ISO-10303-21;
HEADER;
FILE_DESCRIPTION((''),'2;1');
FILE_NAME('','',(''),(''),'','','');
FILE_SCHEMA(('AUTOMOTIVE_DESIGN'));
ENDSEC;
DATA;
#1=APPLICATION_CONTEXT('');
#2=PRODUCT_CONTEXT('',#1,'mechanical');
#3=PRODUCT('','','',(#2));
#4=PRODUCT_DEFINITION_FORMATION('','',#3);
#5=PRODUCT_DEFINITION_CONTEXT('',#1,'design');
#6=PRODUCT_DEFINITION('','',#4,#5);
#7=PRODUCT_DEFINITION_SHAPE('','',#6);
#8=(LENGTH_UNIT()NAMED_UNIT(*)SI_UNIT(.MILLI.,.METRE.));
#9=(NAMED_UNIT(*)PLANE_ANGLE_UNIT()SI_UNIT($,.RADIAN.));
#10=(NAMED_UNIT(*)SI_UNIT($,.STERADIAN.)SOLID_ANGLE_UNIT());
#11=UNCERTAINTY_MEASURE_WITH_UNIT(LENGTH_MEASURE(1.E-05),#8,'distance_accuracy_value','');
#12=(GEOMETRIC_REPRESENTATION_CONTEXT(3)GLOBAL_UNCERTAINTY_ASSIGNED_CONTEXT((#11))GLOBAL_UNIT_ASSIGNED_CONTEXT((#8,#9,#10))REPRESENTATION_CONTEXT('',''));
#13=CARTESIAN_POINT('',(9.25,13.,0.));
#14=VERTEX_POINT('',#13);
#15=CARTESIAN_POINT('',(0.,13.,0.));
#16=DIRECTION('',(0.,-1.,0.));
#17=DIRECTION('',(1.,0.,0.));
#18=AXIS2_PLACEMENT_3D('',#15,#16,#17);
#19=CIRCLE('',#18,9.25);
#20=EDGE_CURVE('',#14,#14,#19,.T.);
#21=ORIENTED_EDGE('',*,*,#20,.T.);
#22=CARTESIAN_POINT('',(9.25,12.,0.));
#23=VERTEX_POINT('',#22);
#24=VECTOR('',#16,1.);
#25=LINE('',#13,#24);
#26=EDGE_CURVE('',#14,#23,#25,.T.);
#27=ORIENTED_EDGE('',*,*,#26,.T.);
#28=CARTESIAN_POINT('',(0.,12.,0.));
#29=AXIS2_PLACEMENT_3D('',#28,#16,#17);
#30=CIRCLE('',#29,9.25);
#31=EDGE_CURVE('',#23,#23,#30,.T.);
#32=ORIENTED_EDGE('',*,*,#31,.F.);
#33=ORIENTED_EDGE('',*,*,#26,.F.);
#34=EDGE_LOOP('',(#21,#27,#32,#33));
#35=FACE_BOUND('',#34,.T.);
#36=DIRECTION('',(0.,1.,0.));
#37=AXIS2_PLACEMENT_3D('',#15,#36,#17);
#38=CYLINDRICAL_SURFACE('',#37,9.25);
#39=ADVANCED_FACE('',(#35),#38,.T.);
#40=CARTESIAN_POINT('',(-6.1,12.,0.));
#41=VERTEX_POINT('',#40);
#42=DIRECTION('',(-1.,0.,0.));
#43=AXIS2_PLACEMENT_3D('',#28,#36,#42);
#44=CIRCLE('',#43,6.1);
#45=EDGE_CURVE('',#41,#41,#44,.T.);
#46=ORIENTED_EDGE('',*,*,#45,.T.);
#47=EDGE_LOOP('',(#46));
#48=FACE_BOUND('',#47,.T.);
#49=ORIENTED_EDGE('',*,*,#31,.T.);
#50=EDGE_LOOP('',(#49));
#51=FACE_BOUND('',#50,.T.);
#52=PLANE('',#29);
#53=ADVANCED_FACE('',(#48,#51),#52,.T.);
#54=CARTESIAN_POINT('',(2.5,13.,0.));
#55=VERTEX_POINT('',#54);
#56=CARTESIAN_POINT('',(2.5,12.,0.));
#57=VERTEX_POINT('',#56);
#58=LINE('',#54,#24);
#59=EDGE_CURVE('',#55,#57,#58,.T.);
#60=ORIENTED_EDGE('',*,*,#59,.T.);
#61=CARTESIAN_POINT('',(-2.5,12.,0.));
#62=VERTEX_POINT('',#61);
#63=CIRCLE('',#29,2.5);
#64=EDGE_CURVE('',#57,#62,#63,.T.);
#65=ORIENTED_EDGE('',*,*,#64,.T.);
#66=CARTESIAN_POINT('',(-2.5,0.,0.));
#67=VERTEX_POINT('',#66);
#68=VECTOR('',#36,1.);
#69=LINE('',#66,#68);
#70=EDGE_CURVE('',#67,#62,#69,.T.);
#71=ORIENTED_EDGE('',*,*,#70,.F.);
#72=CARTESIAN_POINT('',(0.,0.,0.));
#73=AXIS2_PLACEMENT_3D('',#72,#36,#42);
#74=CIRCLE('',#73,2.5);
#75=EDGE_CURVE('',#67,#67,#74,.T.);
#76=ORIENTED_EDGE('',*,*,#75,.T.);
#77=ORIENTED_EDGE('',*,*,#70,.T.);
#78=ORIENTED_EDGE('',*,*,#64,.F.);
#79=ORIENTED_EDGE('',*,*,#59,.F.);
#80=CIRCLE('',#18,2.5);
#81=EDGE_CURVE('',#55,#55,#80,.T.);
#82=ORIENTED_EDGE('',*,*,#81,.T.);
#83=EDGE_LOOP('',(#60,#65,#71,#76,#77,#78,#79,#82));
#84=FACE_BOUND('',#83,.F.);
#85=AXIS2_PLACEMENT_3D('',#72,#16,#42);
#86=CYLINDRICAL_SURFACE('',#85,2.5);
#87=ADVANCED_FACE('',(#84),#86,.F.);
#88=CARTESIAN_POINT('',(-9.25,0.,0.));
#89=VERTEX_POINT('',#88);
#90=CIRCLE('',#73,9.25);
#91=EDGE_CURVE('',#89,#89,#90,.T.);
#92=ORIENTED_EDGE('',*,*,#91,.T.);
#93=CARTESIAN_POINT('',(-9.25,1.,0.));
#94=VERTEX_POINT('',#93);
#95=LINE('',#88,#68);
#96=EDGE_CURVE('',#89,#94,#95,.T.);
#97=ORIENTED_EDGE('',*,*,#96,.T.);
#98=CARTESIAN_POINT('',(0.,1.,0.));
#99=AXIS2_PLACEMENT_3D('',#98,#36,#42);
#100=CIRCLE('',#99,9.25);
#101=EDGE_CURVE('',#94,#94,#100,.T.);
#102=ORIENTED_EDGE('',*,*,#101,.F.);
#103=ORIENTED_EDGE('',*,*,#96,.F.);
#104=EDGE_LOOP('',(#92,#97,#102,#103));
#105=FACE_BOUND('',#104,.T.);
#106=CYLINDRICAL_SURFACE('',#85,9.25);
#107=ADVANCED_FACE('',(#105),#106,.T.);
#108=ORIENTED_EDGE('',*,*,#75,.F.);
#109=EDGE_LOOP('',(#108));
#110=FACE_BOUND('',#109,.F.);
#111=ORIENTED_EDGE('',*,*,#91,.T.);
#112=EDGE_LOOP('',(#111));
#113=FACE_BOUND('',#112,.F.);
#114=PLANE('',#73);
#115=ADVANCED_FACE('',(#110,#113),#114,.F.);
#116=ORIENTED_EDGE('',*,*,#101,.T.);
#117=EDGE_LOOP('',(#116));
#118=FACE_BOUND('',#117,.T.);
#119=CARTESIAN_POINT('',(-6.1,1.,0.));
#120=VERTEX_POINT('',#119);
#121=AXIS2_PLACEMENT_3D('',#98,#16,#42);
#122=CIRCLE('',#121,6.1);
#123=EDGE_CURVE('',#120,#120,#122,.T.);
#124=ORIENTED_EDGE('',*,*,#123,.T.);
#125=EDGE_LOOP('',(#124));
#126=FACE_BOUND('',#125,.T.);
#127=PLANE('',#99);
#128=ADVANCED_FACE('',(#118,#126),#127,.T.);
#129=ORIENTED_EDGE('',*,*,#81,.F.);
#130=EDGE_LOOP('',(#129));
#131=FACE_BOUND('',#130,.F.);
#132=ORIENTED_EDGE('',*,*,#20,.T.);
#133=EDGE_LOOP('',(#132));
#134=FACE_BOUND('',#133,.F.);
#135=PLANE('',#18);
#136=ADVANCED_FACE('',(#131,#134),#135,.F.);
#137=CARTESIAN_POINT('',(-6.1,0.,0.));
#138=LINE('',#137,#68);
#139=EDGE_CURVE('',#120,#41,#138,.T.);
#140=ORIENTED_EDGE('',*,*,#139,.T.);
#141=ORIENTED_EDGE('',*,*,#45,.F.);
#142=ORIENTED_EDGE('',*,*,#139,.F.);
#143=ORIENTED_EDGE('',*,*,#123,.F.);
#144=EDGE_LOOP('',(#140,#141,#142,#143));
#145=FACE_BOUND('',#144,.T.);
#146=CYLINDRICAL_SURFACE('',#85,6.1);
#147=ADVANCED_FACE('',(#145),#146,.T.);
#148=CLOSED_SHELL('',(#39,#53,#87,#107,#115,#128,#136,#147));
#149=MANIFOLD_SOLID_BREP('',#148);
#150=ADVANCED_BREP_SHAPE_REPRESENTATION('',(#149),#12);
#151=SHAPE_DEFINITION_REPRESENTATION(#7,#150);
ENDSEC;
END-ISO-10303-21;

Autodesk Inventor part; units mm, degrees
ref_plane "YZ Plane" through (0, 0, 0) normal (1, 0, 0) x (0, 1, 0)
ref_plane "XZ Plane" through (0, 0, 0) normal (0, 1, 0) x (-1, 0, 0)
ref_plane "XY Plane" through (0, 0, 0) normal (0, 0, 1) x (1, 0, 0)
sketch "Sketch1" plane through (0, 0, 0) normal (0, 1, 0) x (-1, 0, 0)
  circle A0 centre (0, 0) radius 9.25
  circle A1 centre (0, 0) radius 2.5
  circle A2 centre (0, 0) radius 6.1
  dimension "d0" = 18.5
  dimension "d1" = 5
  dimension "d4" = 12.2
extrude "Extrusion1" add sketch "Sketch1" along normal blind 1 contours A0 | A2
ref_plane "Work Plane1" through (0, 13, 0) normal (0, -1, 0) x (1, 0, 0)
sketch "Sketch2" plane through (0, 13, 0) normal (0, -1, 0) x (1, 0, 0)
  circle A0 centre (0, 0) radius 9.25 projected
  circle A1 centre (0, 0) radius 2.5 projected
extrude "Extrusion2" add sketch "Sketch2" along normal blind 1
extrude "Extrusion3" add sketch "Sketch1" along normal up to surface (12 mm away) contours A2
properties part number "Idler Pulley 10mm 5mm Bore" material "Aluminum 6061"
